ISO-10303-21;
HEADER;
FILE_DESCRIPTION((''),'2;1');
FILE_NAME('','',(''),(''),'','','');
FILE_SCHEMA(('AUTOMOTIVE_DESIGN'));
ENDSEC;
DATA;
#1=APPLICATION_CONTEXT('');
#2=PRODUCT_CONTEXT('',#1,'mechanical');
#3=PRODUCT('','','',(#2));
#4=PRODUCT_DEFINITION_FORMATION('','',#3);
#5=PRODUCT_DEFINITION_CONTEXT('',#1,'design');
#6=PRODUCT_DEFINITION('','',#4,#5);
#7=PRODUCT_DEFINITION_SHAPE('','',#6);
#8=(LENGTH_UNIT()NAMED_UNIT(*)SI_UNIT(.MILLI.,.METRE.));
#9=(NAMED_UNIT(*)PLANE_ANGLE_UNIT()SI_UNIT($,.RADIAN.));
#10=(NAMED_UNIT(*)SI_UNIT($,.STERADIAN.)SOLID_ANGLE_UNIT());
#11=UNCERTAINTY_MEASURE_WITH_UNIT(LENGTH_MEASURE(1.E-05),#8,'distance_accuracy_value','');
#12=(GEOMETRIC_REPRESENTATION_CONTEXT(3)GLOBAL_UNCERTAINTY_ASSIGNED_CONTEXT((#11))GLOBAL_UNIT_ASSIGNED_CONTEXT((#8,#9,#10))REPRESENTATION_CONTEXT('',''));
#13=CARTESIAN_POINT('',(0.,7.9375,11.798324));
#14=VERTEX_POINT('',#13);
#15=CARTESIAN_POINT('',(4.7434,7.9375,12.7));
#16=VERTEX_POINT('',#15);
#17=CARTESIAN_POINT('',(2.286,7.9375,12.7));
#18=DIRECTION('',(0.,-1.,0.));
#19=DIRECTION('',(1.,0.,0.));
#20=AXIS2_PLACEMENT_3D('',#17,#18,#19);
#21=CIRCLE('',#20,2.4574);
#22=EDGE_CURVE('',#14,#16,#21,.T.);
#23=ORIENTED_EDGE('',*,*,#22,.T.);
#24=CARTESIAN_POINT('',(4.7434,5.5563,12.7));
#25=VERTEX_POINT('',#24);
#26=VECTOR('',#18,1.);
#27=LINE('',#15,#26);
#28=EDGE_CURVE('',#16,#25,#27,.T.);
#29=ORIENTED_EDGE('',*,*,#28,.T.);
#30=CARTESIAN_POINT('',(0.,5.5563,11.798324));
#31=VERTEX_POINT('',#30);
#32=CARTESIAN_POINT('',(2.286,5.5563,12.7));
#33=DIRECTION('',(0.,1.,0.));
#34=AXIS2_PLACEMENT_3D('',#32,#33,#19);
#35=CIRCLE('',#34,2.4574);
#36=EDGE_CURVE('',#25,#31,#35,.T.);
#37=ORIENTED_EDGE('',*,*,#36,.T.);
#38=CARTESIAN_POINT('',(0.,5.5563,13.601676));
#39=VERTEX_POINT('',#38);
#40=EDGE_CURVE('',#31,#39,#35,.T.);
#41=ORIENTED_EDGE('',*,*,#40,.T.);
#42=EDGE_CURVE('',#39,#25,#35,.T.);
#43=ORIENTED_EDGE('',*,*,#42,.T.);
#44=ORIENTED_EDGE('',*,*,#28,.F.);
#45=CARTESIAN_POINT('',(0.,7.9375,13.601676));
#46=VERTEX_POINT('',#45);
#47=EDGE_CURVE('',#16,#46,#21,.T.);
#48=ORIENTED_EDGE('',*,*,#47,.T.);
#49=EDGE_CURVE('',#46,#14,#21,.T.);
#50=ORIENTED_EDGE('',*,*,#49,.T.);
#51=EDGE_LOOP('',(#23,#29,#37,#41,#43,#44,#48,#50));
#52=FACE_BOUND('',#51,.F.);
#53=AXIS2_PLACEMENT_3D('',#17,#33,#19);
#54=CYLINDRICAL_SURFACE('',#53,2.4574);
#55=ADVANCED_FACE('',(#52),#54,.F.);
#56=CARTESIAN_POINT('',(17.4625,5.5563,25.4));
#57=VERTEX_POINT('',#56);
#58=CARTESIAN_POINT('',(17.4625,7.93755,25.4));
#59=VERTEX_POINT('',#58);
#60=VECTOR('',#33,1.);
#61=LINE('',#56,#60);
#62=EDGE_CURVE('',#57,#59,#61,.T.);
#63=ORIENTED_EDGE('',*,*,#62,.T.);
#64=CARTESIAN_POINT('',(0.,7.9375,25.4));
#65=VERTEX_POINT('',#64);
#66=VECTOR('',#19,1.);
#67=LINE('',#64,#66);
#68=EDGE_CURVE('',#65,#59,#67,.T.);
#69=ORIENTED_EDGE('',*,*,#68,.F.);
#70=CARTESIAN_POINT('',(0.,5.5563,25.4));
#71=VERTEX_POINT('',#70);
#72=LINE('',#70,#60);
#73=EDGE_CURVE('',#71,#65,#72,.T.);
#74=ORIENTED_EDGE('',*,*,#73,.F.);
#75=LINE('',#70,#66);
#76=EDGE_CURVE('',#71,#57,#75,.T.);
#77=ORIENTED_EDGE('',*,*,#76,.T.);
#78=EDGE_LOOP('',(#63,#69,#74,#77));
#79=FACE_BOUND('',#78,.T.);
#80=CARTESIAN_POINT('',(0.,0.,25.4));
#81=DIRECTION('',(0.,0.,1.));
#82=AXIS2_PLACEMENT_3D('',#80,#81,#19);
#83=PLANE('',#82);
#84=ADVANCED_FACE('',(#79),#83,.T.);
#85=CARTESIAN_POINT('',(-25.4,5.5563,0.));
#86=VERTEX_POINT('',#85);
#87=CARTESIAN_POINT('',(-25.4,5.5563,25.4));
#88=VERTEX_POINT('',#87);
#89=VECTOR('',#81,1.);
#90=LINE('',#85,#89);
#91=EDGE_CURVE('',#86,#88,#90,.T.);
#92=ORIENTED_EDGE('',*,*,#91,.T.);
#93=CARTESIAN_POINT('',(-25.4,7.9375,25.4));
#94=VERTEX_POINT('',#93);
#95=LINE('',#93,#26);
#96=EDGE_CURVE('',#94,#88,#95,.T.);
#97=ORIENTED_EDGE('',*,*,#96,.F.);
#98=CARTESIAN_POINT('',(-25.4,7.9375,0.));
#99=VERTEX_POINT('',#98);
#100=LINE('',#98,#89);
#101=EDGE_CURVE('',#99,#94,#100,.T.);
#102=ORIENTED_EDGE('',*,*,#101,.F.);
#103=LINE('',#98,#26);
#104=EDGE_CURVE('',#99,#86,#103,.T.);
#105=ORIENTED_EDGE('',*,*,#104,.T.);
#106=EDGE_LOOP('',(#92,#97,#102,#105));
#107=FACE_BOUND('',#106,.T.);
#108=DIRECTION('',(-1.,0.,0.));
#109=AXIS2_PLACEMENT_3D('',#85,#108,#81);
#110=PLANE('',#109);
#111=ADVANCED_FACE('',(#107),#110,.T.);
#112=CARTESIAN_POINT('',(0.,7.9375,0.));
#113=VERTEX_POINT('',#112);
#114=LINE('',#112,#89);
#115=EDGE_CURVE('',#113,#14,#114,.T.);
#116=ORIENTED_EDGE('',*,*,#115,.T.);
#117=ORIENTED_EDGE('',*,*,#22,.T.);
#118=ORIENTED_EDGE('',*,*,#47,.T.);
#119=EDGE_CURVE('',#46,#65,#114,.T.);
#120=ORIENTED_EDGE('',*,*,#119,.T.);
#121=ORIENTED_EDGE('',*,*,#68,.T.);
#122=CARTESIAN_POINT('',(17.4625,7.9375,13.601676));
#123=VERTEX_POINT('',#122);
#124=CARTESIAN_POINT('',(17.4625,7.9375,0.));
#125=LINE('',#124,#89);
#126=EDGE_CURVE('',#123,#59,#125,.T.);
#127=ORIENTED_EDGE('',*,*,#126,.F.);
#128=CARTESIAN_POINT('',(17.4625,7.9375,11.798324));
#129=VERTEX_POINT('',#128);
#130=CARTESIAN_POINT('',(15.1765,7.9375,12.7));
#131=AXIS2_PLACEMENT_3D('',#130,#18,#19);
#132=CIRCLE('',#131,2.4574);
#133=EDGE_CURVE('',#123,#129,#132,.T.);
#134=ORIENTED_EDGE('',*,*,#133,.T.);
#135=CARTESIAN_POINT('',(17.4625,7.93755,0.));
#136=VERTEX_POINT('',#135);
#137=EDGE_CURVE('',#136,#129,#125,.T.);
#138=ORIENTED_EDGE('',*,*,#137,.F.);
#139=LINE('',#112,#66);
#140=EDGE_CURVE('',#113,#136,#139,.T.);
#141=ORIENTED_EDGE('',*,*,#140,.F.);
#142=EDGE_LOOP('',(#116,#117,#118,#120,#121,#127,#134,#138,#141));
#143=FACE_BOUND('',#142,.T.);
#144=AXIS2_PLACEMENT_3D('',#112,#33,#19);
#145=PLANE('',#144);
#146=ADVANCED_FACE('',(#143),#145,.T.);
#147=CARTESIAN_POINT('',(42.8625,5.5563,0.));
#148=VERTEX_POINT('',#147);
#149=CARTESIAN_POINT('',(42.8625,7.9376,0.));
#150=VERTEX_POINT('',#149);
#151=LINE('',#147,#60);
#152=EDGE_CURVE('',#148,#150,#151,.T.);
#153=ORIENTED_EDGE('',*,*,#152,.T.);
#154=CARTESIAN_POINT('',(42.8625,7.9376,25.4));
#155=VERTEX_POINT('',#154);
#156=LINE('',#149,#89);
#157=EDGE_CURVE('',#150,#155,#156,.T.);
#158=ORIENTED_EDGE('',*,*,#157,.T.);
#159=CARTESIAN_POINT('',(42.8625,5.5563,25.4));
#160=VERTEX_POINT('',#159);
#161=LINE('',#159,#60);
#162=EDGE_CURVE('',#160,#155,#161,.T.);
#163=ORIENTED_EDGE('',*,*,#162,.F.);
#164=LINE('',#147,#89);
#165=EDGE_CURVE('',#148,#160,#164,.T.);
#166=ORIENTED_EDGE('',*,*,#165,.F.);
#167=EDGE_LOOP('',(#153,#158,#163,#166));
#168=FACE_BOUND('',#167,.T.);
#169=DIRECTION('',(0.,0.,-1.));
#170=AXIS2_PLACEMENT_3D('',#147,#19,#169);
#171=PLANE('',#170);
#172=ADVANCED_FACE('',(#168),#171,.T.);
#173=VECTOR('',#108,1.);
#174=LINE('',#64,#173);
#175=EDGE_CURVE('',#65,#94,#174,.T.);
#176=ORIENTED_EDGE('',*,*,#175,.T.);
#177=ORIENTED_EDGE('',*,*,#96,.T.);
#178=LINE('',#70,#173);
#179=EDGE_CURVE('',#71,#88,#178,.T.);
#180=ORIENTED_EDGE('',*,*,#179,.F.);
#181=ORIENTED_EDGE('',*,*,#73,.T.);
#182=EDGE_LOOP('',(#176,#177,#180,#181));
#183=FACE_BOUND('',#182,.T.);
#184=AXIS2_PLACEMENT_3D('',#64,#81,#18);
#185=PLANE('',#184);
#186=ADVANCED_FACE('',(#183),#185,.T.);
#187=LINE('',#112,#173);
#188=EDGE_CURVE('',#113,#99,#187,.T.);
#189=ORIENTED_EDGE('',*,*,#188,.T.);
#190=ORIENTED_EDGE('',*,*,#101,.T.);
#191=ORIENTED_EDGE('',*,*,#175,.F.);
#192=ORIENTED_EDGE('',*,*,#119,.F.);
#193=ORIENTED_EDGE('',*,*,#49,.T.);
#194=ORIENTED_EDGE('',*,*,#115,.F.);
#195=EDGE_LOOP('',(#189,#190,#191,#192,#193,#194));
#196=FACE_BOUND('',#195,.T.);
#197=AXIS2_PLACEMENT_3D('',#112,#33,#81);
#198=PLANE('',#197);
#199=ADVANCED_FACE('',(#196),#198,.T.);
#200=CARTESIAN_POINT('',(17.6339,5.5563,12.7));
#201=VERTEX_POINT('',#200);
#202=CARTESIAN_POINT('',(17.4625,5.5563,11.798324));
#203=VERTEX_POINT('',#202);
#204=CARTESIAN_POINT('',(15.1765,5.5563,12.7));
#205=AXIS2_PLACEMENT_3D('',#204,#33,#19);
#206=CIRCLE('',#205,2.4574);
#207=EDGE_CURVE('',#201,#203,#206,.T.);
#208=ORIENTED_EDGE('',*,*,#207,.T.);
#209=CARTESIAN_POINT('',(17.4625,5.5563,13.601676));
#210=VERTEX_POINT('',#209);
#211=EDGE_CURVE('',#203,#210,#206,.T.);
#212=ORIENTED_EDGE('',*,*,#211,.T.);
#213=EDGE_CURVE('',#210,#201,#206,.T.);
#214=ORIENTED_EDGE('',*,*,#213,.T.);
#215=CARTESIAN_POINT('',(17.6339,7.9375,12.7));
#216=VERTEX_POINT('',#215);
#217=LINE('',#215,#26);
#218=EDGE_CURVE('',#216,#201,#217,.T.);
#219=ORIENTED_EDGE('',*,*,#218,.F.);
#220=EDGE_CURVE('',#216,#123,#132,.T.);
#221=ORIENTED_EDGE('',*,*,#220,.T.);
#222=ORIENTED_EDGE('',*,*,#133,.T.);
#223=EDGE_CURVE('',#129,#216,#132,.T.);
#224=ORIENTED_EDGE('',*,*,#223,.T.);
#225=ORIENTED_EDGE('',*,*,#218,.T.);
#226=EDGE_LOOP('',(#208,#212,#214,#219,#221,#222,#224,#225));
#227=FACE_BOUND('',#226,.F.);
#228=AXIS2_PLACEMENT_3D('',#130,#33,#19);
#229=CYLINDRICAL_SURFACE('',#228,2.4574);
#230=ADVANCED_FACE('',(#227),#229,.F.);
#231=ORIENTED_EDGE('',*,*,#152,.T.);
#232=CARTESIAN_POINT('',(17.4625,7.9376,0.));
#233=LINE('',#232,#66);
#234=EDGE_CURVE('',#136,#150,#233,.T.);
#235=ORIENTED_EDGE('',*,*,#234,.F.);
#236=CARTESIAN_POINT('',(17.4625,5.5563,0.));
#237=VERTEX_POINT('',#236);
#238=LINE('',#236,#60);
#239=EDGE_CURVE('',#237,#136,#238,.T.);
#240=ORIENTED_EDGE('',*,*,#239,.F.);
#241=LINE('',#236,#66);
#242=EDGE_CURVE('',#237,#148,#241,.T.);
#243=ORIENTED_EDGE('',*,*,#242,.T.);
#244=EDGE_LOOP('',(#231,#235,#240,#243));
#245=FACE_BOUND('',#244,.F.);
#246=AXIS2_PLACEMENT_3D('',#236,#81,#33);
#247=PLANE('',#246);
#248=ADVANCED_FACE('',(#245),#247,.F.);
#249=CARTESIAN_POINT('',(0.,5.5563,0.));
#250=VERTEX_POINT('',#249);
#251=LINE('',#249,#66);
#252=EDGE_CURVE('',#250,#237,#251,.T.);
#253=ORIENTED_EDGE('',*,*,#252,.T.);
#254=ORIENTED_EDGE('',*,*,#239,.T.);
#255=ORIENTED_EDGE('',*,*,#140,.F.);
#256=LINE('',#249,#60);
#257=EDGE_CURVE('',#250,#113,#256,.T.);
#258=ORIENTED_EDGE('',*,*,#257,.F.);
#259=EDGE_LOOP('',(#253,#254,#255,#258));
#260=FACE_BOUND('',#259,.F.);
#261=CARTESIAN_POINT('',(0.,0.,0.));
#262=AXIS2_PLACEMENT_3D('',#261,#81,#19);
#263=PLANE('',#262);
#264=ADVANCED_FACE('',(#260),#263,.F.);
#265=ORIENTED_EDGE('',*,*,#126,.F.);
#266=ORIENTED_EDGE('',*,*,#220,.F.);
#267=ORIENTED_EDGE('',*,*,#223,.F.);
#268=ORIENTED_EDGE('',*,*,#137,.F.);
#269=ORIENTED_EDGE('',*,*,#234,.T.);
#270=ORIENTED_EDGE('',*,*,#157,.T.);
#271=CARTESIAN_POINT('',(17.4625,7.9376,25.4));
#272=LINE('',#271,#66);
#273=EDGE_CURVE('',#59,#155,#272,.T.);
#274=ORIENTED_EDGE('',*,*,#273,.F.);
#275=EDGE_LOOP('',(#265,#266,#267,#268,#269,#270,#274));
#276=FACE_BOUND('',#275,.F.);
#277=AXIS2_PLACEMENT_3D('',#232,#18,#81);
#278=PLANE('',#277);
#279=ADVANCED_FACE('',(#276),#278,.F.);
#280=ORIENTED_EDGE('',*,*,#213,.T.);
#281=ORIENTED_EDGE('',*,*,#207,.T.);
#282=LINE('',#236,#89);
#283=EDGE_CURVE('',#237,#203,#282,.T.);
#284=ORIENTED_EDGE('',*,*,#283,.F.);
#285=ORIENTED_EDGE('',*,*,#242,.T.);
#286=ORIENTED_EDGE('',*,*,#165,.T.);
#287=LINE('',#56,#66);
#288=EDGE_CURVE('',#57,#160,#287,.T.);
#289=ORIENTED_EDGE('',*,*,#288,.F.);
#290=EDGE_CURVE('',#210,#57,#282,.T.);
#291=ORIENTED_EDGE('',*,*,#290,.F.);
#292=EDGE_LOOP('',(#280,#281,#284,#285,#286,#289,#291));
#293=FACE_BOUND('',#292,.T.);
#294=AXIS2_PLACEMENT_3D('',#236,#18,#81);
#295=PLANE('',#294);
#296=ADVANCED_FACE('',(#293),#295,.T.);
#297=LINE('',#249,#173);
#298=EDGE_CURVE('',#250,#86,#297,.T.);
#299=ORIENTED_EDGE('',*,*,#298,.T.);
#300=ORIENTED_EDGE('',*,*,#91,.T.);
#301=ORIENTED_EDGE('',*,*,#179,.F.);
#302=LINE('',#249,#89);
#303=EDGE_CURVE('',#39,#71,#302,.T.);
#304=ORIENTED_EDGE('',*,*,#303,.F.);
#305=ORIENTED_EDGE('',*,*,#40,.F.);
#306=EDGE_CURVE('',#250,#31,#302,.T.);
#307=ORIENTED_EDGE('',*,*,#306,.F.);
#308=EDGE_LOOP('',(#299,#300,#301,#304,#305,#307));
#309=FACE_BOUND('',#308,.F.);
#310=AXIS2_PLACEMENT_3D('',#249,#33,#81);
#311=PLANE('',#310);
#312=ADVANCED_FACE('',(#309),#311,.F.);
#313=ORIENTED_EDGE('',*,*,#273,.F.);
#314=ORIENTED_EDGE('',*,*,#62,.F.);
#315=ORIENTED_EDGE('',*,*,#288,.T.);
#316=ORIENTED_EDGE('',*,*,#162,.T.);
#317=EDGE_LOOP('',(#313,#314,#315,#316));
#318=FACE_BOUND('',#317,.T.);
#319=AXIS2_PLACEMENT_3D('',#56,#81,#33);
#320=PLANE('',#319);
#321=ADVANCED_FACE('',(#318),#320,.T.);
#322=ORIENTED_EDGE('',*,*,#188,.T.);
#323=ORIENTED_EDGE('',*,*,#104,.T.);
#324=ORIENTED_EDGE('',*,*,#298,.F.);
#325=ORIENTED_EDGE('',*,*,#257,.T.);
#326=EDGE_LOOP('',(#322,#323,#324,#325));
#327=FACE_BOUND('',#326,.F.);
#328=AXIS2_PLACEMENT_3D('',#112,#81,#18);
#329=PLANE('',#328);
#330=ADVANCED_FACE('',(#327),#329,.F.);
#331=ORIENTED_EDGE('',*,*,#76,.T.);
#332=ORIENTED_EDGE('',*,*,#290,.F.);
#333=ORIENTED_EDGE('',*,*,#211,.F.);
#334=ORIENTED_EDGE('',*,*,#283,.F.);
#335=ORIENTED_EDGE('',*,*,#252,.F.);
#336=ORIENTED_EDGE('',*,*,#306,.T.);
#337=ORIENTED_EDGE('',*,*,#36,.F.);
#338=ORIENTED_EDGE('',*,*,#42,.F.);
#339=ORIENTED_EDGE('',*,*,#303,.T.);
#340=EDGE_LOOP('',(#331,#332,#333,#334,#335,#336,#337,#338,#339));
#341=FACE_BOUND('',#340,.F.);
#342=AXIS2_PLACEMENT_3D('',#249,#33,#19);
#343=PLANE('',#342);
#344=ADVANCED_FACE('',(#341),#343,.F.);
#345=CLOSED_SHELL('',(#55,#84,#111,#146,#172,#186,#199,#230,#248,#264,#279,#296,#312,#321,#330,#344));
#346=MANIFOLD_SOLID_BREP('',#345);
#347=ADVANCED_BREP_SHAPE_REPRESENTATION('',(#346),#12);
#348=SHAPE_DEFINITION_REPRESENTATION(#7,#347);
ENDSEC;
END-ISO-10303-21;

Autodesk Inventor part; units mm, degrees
ref_plane "YZ Plane" through (0, 0, 0) normal (1, 0, 0) x (0, 1, 0)
ref_plane "XZ Plane" through (0, 0, 0) normal (0, 1, 0) x (-1, 0, 0)
sketch "Sketch1" plane through (0, 0, 0) normal (0, 0, 1) x (1, 0, 0)
  line L0 (0, 0) -> (4.7625, 0)
  line L1 (4.7625, 3.1115) -> (3.9687, 3.1115) construction
  line L2 (0, 3.1115) -> (0, 0)
  line L3 (4.7625, 0) -> (12.7, 0)
  line L4 (12.7, 0) -> (12.7, 3.1115) construction
  line L5 (12.7, 5.1753) -> (11.1125, 5.1753) construction
  line L6 (4.7625, 5.1753) -> (4.7625, 3.1115) construction
  line L7 (2.3812, 3.1115) -> (2.3812, 0) construction
  line L8 (8.7312, 5.1753) -> (8.7312, 0) construction
  line L9 (2.3812, 3.1115) -> (2.3812, 5.4927) construction
  circle A0 centre (2.3812, 5.4927) radius 2.3812 construction
  line L10 (6.35, 5.1753) -> (6.35, 0) construction
  line L11 (11.1125, 5.1753) -> (11.1125, 0) construction
  line L12 (4.7625, 3.1115) -> (12.7, 3.1115) construction
  line L13 (6.35, 5.1753) -> (4.7625, 5.1753) construction
  line L14 (4.7625, 3.1115) -> (4.7625, 0) construction
  line L15 (11.1125, 5.1753) -> (10.3187, 5.1753) construction
  line L16 (12.7, 3.1115) -> (12.7, 5.1753) construction
  line L17 (8.7312, 5.1753) -> (8.7312, 7.5565) construction
  circle A1 centre (8.7312, 7.5565) radius 2.3813 construction
  line L18 (0.7937, 3.1115) -> (0.7937, 0)
  line L19 (3.9687, 3.1115) -> (3.9687, 0)
  line L20 (7.1437, 5.1753) -> (7.1437, 0)
  line L21 (10.3187, 5.1753) -> (10.3187, 0)
  line L22 (3.9687, 3.1115) -> (0.7937, 3.1115)
  line L23 (0.7937, 3.1115) -> (0, 3.1115)
  line L24 (10.3187, 5.1753) -> (8.7312, 5.1753)
  line L25 (7.1437, 5.1753) -> (6.35, 5.1753) construction
  line L26 (8.7312, 5.1753) -> (7.1437, 5.1753)
  line L27 (3.9687, 3.1115) -> (7.1437, 5.1753)
  line L28 (0, 0) -> (0, 5.5563) construction
  line L29 (0, 5.5563) -> (17.4625, 5.5563)
  line L30 (0, 5.5563) -> (0, 7.9375)
  line L31 (0, 7.9375) -> (17.4625, 7.9375)
  line L32 (12.7, 3.1115) -> (13.4937, 3.1115) construction
  line L33 (12.7, 0) -> (17.4625, 0)
  line L34 (17.4625, 0) -> (17.4625, 3.1115)
  line L35 (15.0812, 0) -> (15.0812, 3.1115) construction
  line L36 (13.4937, 3.1115) -> (13.4937, 0)
  line L37 (16.6687, 3.1115) -> (16.6687, 0)
  line L38 (13.4937, 3.1115) -> (15.0812, 3.1115)
  line L39 (16.6687, 3.1115) -> (17.4625, 3.1115)
  line L40 (15.0812, 3.1115) -> (16.6687, 3.1115)
  line L41 (15.0812, 3.1115) -> (15.0812, 5.4928) construction
  circle A2 centre (15.0812, 5.4928) radius 2.3813 construction
  line L42 (10.3187, 5.1753) -> (13.4937, 3.1115)
  line L43 (0, -12.7) -> (0, 0) construction
  line L44 (0, -7.1437) -> (26.1938, -7.1437) construction
  line L45 (0, -4.7625) -> (26.1938, -4.7625) construction
  line L46 (26.1938, -4.7625) -> (26.1938, -7.1437) construction
  line L47 (26.1938, -7.1437) -> (26.1938, -12.7) construction
  line L48 (26.1938, -12.7) -> (0, -12.7) construction
  line L49 (26.1938, -6.35) -> (34.3852, -6.35) construction
  line L50 (26.1938, -12.7) -> (34.3852, -12.7) construction
  line L51 (34.3852, -12.7) -> (34.3852, -6.35) construction
  line L52 (16.6688, -4.7625) -> (16.6688, -12.7) construction
  circle A3 centre (16.6688, -5.1435) radius 2.3813 construction
  circle A4 centre (16.6688, -7.2073) radius 2.3813 construction
  circle A5 centre (10.3187, -5.1435) radius 2.3813 construction
  circle A6 centre (10.3187, -7.2073) radius 2.3813 construction
  line L53 (10.3187, -4.7625) -> (10.3187, -12.7) construction
  line L54 (0, -7.5248) -> (26.1938, -7.5248) construction
  line L55 (8.7312, -7.5248) -> (8.7312, -12.7) construction
  line L56 (5.5562, -7.5248) -> (5.5562, -12.7) construction
  line L57 (18.2563, -7.5248) -> (18.2563, -12.7) construction
  line L58 (21.4313, -7.5248) -> (21.4313, -12.7) construction
  line L59 (0, -9.5885) -> (26.1938, -9.5885) construction
  line L60 (5.5562, -9.5885) -> (8.7312, -7.5248) construction
  line L61 (18.2563, -7.5248) -> (21.4312, -9.5885) construction
  line L62 (11.9062, -7.5248) -> (11.9062, -12.7) construction
  line L63 (15.0812, -7.5248) -> (15.0812, -12.7) construction
  line L64 (11.9062, -7.5248) -> (15.0812, -9.5885) construction
  line L65 (21.4313, -9.3266) -> (34.3852, -9.3266) construction
  line L66 (24.6063, -9.3266) -> (24.6063, -12.7) construction
  line L67 (21.4313, -9.3266) -> (20.1197, -7.1437) construction
  line L68 (26.1938, -9.5885) -> (30.9563, -9.5885) construction
  line L69 (30.9563, -9.5885) -> (30.9563, -12.7) construction
  line L70 (31.75, -9.3266) -> (31.75, -12.7) construction
  line L71 (31.75, -12.7) -> (29.723, -9.3266) construction
  line L72 (0, -4.7625) -> (-1.5875, -4.7625) construction
  line L73 (-1.5875, -4.7625) -> (-1.5875, -9.3266) construction
  line L74 (-1.5875, -9.3266) -> (5.5562, -9.3266) construction
  line L75 (1.4233, 7.874) -> (3.7622, 7.874)
  line L76 (17.4625, 5.5563) -> (17.4625, 7.9375)
  dimension "d8" = 6.35
  dimension "d9" = 5.1753
  dimension "d10" = 4.7625
  dimension "d11" = 2.3813
  dimension "d12" = 3.175
  dimension "d13" = 3.175
  dimension "d14" = 4.7625
  dimension "d15" = 2.3813
  dimension "d16" = 3.1115
  dimension "d17" = 5.5563
  dimension "d18" = 7.9375
  dimension "d19" = 6.35
  dimension "d20" = 3.175
  dimension "d21" = 2.3813
  dimension "d25" = 12.7
  dimension "d26" = 5.5563
  dimension "d27" = 7.9375
  dimension "d28" = 26.1938
  dimension "d29" = 8.1915
  dimension "d30" = 6.35
  dimension "d33" = 9.525
  dimension "d35" = 0.381
  dimension "d36" = 0.0635
  dimension "d38" = 6.35
  dimension "d39" = 0.381
  dimension "d40" = 0.381
  dimension "d41" = 0.0635
  dimension "d42" = 0.0635
  dimension "d43" = 9.525
  dimension "d46" = 1.5875
  dimension "d47" = 4.7625
  dimension "d48" = 1.5875
  dimension "d49" = 4.7625
  dimension "d50" = 3.1115
  dimension "d51" = 1.5875
  dimension "d52" = 4.7625
  dimension "d53" = 3.3734
  dimension "d54" = 3.175
  dimension "d55" = 31
  dimension "d56" = 9.525
  dimension "d57" = 9.525
  dimension "d59" = 0.7937
  dimension "d60" = 31
  dimension "d61" = 1.5875
  dimension "d62" = 3.3734
  dimension "d63" = 0.0635
extrude "Extrusion1" add sketch "Sketch1" along normal blind 25.4 contours L30 L31 L76 L29
sketch "Sketch2" plane through (17.4625, 5.5563, 0) normal (1, 0, 0) x (0, 0, -1)
  line L0 (0, 0) -> (0, 2.3813) projected
  line L1 (0, 2.3813) -> (-25.4, 2.3813) projected
  line L2 (-25.4, 0) -> (-25.4, 2.3813) projected
  line L3 (0, 0) -> (-25.4, 0) projected
  point P0 (0, -5.5562)
extrude "Extrusion3" add sketch "Sketch2" along normal blind 25.4
sketch "Sketch4" plane through (0, 5.5563, 0) normal (-1, 0, 0) x (0, 0, 1)
  line L0 (0, 2.3812) -> (0, 0) projected
  line L1 (0, 0) -> (25.4, 0) projected
  line L2 (25.4, 2.3812) -> (25.4, 0) projected
  line L3 (0, 2.3812) -> (25.4, 2.3812) projected
  point P0 (0, -5.5563)
extrude "Extrusion4" add sketch "Sketch4" along normal blind 25.4
sketch "Sketch3" plane through (0, 7.9375, 0) normal (0, 1, 0) x (1, 0, 0)
  line L0 (0, 0) -> (0, -25.4) projected
  line L1 (17.4625, 0) -> (17.4625, -25.4) projected
  circle A0 centre (2.286, -12.7) radius 2.4574
  circle A1 centre (15.1765, -12.7) radius 2.4574
  line L2 (0, -12.7) -> (17.4625, -12.7) construction
  dimension "d66" = 4.9149
  dimension "d67" = 12.8905
  dimension "d68" = 2.286
  dimension "d69" = 2.286
extrude "Extrusion2" cut sketch "Sketch3" against normal blind 25.4
ref_plane "Work Plane1" through (42.8625, 0, 0) normal (0, -1, 0) x (1, 0, 0)
equation "\"d19\" = d8"
equation "\"d26\" = d17"
equation "\"d27\" = d18"
equation "\"d39\" = d35"
equation "\"d40\" = d39"
equation "\"d41\" = d36"
equation "\"d42\" = d41"
equation "\"d50\" = d16"
equation "\"d51\" = d46"
equation "\"d52\" = d47"
equation "\"d57\" = d56"
equation "\"d60\" = d55"
equation "\"d62\" = d53"
equation "\"d68\" = d69"
properties part number "Sketch - Ball Shifting Shaft"
